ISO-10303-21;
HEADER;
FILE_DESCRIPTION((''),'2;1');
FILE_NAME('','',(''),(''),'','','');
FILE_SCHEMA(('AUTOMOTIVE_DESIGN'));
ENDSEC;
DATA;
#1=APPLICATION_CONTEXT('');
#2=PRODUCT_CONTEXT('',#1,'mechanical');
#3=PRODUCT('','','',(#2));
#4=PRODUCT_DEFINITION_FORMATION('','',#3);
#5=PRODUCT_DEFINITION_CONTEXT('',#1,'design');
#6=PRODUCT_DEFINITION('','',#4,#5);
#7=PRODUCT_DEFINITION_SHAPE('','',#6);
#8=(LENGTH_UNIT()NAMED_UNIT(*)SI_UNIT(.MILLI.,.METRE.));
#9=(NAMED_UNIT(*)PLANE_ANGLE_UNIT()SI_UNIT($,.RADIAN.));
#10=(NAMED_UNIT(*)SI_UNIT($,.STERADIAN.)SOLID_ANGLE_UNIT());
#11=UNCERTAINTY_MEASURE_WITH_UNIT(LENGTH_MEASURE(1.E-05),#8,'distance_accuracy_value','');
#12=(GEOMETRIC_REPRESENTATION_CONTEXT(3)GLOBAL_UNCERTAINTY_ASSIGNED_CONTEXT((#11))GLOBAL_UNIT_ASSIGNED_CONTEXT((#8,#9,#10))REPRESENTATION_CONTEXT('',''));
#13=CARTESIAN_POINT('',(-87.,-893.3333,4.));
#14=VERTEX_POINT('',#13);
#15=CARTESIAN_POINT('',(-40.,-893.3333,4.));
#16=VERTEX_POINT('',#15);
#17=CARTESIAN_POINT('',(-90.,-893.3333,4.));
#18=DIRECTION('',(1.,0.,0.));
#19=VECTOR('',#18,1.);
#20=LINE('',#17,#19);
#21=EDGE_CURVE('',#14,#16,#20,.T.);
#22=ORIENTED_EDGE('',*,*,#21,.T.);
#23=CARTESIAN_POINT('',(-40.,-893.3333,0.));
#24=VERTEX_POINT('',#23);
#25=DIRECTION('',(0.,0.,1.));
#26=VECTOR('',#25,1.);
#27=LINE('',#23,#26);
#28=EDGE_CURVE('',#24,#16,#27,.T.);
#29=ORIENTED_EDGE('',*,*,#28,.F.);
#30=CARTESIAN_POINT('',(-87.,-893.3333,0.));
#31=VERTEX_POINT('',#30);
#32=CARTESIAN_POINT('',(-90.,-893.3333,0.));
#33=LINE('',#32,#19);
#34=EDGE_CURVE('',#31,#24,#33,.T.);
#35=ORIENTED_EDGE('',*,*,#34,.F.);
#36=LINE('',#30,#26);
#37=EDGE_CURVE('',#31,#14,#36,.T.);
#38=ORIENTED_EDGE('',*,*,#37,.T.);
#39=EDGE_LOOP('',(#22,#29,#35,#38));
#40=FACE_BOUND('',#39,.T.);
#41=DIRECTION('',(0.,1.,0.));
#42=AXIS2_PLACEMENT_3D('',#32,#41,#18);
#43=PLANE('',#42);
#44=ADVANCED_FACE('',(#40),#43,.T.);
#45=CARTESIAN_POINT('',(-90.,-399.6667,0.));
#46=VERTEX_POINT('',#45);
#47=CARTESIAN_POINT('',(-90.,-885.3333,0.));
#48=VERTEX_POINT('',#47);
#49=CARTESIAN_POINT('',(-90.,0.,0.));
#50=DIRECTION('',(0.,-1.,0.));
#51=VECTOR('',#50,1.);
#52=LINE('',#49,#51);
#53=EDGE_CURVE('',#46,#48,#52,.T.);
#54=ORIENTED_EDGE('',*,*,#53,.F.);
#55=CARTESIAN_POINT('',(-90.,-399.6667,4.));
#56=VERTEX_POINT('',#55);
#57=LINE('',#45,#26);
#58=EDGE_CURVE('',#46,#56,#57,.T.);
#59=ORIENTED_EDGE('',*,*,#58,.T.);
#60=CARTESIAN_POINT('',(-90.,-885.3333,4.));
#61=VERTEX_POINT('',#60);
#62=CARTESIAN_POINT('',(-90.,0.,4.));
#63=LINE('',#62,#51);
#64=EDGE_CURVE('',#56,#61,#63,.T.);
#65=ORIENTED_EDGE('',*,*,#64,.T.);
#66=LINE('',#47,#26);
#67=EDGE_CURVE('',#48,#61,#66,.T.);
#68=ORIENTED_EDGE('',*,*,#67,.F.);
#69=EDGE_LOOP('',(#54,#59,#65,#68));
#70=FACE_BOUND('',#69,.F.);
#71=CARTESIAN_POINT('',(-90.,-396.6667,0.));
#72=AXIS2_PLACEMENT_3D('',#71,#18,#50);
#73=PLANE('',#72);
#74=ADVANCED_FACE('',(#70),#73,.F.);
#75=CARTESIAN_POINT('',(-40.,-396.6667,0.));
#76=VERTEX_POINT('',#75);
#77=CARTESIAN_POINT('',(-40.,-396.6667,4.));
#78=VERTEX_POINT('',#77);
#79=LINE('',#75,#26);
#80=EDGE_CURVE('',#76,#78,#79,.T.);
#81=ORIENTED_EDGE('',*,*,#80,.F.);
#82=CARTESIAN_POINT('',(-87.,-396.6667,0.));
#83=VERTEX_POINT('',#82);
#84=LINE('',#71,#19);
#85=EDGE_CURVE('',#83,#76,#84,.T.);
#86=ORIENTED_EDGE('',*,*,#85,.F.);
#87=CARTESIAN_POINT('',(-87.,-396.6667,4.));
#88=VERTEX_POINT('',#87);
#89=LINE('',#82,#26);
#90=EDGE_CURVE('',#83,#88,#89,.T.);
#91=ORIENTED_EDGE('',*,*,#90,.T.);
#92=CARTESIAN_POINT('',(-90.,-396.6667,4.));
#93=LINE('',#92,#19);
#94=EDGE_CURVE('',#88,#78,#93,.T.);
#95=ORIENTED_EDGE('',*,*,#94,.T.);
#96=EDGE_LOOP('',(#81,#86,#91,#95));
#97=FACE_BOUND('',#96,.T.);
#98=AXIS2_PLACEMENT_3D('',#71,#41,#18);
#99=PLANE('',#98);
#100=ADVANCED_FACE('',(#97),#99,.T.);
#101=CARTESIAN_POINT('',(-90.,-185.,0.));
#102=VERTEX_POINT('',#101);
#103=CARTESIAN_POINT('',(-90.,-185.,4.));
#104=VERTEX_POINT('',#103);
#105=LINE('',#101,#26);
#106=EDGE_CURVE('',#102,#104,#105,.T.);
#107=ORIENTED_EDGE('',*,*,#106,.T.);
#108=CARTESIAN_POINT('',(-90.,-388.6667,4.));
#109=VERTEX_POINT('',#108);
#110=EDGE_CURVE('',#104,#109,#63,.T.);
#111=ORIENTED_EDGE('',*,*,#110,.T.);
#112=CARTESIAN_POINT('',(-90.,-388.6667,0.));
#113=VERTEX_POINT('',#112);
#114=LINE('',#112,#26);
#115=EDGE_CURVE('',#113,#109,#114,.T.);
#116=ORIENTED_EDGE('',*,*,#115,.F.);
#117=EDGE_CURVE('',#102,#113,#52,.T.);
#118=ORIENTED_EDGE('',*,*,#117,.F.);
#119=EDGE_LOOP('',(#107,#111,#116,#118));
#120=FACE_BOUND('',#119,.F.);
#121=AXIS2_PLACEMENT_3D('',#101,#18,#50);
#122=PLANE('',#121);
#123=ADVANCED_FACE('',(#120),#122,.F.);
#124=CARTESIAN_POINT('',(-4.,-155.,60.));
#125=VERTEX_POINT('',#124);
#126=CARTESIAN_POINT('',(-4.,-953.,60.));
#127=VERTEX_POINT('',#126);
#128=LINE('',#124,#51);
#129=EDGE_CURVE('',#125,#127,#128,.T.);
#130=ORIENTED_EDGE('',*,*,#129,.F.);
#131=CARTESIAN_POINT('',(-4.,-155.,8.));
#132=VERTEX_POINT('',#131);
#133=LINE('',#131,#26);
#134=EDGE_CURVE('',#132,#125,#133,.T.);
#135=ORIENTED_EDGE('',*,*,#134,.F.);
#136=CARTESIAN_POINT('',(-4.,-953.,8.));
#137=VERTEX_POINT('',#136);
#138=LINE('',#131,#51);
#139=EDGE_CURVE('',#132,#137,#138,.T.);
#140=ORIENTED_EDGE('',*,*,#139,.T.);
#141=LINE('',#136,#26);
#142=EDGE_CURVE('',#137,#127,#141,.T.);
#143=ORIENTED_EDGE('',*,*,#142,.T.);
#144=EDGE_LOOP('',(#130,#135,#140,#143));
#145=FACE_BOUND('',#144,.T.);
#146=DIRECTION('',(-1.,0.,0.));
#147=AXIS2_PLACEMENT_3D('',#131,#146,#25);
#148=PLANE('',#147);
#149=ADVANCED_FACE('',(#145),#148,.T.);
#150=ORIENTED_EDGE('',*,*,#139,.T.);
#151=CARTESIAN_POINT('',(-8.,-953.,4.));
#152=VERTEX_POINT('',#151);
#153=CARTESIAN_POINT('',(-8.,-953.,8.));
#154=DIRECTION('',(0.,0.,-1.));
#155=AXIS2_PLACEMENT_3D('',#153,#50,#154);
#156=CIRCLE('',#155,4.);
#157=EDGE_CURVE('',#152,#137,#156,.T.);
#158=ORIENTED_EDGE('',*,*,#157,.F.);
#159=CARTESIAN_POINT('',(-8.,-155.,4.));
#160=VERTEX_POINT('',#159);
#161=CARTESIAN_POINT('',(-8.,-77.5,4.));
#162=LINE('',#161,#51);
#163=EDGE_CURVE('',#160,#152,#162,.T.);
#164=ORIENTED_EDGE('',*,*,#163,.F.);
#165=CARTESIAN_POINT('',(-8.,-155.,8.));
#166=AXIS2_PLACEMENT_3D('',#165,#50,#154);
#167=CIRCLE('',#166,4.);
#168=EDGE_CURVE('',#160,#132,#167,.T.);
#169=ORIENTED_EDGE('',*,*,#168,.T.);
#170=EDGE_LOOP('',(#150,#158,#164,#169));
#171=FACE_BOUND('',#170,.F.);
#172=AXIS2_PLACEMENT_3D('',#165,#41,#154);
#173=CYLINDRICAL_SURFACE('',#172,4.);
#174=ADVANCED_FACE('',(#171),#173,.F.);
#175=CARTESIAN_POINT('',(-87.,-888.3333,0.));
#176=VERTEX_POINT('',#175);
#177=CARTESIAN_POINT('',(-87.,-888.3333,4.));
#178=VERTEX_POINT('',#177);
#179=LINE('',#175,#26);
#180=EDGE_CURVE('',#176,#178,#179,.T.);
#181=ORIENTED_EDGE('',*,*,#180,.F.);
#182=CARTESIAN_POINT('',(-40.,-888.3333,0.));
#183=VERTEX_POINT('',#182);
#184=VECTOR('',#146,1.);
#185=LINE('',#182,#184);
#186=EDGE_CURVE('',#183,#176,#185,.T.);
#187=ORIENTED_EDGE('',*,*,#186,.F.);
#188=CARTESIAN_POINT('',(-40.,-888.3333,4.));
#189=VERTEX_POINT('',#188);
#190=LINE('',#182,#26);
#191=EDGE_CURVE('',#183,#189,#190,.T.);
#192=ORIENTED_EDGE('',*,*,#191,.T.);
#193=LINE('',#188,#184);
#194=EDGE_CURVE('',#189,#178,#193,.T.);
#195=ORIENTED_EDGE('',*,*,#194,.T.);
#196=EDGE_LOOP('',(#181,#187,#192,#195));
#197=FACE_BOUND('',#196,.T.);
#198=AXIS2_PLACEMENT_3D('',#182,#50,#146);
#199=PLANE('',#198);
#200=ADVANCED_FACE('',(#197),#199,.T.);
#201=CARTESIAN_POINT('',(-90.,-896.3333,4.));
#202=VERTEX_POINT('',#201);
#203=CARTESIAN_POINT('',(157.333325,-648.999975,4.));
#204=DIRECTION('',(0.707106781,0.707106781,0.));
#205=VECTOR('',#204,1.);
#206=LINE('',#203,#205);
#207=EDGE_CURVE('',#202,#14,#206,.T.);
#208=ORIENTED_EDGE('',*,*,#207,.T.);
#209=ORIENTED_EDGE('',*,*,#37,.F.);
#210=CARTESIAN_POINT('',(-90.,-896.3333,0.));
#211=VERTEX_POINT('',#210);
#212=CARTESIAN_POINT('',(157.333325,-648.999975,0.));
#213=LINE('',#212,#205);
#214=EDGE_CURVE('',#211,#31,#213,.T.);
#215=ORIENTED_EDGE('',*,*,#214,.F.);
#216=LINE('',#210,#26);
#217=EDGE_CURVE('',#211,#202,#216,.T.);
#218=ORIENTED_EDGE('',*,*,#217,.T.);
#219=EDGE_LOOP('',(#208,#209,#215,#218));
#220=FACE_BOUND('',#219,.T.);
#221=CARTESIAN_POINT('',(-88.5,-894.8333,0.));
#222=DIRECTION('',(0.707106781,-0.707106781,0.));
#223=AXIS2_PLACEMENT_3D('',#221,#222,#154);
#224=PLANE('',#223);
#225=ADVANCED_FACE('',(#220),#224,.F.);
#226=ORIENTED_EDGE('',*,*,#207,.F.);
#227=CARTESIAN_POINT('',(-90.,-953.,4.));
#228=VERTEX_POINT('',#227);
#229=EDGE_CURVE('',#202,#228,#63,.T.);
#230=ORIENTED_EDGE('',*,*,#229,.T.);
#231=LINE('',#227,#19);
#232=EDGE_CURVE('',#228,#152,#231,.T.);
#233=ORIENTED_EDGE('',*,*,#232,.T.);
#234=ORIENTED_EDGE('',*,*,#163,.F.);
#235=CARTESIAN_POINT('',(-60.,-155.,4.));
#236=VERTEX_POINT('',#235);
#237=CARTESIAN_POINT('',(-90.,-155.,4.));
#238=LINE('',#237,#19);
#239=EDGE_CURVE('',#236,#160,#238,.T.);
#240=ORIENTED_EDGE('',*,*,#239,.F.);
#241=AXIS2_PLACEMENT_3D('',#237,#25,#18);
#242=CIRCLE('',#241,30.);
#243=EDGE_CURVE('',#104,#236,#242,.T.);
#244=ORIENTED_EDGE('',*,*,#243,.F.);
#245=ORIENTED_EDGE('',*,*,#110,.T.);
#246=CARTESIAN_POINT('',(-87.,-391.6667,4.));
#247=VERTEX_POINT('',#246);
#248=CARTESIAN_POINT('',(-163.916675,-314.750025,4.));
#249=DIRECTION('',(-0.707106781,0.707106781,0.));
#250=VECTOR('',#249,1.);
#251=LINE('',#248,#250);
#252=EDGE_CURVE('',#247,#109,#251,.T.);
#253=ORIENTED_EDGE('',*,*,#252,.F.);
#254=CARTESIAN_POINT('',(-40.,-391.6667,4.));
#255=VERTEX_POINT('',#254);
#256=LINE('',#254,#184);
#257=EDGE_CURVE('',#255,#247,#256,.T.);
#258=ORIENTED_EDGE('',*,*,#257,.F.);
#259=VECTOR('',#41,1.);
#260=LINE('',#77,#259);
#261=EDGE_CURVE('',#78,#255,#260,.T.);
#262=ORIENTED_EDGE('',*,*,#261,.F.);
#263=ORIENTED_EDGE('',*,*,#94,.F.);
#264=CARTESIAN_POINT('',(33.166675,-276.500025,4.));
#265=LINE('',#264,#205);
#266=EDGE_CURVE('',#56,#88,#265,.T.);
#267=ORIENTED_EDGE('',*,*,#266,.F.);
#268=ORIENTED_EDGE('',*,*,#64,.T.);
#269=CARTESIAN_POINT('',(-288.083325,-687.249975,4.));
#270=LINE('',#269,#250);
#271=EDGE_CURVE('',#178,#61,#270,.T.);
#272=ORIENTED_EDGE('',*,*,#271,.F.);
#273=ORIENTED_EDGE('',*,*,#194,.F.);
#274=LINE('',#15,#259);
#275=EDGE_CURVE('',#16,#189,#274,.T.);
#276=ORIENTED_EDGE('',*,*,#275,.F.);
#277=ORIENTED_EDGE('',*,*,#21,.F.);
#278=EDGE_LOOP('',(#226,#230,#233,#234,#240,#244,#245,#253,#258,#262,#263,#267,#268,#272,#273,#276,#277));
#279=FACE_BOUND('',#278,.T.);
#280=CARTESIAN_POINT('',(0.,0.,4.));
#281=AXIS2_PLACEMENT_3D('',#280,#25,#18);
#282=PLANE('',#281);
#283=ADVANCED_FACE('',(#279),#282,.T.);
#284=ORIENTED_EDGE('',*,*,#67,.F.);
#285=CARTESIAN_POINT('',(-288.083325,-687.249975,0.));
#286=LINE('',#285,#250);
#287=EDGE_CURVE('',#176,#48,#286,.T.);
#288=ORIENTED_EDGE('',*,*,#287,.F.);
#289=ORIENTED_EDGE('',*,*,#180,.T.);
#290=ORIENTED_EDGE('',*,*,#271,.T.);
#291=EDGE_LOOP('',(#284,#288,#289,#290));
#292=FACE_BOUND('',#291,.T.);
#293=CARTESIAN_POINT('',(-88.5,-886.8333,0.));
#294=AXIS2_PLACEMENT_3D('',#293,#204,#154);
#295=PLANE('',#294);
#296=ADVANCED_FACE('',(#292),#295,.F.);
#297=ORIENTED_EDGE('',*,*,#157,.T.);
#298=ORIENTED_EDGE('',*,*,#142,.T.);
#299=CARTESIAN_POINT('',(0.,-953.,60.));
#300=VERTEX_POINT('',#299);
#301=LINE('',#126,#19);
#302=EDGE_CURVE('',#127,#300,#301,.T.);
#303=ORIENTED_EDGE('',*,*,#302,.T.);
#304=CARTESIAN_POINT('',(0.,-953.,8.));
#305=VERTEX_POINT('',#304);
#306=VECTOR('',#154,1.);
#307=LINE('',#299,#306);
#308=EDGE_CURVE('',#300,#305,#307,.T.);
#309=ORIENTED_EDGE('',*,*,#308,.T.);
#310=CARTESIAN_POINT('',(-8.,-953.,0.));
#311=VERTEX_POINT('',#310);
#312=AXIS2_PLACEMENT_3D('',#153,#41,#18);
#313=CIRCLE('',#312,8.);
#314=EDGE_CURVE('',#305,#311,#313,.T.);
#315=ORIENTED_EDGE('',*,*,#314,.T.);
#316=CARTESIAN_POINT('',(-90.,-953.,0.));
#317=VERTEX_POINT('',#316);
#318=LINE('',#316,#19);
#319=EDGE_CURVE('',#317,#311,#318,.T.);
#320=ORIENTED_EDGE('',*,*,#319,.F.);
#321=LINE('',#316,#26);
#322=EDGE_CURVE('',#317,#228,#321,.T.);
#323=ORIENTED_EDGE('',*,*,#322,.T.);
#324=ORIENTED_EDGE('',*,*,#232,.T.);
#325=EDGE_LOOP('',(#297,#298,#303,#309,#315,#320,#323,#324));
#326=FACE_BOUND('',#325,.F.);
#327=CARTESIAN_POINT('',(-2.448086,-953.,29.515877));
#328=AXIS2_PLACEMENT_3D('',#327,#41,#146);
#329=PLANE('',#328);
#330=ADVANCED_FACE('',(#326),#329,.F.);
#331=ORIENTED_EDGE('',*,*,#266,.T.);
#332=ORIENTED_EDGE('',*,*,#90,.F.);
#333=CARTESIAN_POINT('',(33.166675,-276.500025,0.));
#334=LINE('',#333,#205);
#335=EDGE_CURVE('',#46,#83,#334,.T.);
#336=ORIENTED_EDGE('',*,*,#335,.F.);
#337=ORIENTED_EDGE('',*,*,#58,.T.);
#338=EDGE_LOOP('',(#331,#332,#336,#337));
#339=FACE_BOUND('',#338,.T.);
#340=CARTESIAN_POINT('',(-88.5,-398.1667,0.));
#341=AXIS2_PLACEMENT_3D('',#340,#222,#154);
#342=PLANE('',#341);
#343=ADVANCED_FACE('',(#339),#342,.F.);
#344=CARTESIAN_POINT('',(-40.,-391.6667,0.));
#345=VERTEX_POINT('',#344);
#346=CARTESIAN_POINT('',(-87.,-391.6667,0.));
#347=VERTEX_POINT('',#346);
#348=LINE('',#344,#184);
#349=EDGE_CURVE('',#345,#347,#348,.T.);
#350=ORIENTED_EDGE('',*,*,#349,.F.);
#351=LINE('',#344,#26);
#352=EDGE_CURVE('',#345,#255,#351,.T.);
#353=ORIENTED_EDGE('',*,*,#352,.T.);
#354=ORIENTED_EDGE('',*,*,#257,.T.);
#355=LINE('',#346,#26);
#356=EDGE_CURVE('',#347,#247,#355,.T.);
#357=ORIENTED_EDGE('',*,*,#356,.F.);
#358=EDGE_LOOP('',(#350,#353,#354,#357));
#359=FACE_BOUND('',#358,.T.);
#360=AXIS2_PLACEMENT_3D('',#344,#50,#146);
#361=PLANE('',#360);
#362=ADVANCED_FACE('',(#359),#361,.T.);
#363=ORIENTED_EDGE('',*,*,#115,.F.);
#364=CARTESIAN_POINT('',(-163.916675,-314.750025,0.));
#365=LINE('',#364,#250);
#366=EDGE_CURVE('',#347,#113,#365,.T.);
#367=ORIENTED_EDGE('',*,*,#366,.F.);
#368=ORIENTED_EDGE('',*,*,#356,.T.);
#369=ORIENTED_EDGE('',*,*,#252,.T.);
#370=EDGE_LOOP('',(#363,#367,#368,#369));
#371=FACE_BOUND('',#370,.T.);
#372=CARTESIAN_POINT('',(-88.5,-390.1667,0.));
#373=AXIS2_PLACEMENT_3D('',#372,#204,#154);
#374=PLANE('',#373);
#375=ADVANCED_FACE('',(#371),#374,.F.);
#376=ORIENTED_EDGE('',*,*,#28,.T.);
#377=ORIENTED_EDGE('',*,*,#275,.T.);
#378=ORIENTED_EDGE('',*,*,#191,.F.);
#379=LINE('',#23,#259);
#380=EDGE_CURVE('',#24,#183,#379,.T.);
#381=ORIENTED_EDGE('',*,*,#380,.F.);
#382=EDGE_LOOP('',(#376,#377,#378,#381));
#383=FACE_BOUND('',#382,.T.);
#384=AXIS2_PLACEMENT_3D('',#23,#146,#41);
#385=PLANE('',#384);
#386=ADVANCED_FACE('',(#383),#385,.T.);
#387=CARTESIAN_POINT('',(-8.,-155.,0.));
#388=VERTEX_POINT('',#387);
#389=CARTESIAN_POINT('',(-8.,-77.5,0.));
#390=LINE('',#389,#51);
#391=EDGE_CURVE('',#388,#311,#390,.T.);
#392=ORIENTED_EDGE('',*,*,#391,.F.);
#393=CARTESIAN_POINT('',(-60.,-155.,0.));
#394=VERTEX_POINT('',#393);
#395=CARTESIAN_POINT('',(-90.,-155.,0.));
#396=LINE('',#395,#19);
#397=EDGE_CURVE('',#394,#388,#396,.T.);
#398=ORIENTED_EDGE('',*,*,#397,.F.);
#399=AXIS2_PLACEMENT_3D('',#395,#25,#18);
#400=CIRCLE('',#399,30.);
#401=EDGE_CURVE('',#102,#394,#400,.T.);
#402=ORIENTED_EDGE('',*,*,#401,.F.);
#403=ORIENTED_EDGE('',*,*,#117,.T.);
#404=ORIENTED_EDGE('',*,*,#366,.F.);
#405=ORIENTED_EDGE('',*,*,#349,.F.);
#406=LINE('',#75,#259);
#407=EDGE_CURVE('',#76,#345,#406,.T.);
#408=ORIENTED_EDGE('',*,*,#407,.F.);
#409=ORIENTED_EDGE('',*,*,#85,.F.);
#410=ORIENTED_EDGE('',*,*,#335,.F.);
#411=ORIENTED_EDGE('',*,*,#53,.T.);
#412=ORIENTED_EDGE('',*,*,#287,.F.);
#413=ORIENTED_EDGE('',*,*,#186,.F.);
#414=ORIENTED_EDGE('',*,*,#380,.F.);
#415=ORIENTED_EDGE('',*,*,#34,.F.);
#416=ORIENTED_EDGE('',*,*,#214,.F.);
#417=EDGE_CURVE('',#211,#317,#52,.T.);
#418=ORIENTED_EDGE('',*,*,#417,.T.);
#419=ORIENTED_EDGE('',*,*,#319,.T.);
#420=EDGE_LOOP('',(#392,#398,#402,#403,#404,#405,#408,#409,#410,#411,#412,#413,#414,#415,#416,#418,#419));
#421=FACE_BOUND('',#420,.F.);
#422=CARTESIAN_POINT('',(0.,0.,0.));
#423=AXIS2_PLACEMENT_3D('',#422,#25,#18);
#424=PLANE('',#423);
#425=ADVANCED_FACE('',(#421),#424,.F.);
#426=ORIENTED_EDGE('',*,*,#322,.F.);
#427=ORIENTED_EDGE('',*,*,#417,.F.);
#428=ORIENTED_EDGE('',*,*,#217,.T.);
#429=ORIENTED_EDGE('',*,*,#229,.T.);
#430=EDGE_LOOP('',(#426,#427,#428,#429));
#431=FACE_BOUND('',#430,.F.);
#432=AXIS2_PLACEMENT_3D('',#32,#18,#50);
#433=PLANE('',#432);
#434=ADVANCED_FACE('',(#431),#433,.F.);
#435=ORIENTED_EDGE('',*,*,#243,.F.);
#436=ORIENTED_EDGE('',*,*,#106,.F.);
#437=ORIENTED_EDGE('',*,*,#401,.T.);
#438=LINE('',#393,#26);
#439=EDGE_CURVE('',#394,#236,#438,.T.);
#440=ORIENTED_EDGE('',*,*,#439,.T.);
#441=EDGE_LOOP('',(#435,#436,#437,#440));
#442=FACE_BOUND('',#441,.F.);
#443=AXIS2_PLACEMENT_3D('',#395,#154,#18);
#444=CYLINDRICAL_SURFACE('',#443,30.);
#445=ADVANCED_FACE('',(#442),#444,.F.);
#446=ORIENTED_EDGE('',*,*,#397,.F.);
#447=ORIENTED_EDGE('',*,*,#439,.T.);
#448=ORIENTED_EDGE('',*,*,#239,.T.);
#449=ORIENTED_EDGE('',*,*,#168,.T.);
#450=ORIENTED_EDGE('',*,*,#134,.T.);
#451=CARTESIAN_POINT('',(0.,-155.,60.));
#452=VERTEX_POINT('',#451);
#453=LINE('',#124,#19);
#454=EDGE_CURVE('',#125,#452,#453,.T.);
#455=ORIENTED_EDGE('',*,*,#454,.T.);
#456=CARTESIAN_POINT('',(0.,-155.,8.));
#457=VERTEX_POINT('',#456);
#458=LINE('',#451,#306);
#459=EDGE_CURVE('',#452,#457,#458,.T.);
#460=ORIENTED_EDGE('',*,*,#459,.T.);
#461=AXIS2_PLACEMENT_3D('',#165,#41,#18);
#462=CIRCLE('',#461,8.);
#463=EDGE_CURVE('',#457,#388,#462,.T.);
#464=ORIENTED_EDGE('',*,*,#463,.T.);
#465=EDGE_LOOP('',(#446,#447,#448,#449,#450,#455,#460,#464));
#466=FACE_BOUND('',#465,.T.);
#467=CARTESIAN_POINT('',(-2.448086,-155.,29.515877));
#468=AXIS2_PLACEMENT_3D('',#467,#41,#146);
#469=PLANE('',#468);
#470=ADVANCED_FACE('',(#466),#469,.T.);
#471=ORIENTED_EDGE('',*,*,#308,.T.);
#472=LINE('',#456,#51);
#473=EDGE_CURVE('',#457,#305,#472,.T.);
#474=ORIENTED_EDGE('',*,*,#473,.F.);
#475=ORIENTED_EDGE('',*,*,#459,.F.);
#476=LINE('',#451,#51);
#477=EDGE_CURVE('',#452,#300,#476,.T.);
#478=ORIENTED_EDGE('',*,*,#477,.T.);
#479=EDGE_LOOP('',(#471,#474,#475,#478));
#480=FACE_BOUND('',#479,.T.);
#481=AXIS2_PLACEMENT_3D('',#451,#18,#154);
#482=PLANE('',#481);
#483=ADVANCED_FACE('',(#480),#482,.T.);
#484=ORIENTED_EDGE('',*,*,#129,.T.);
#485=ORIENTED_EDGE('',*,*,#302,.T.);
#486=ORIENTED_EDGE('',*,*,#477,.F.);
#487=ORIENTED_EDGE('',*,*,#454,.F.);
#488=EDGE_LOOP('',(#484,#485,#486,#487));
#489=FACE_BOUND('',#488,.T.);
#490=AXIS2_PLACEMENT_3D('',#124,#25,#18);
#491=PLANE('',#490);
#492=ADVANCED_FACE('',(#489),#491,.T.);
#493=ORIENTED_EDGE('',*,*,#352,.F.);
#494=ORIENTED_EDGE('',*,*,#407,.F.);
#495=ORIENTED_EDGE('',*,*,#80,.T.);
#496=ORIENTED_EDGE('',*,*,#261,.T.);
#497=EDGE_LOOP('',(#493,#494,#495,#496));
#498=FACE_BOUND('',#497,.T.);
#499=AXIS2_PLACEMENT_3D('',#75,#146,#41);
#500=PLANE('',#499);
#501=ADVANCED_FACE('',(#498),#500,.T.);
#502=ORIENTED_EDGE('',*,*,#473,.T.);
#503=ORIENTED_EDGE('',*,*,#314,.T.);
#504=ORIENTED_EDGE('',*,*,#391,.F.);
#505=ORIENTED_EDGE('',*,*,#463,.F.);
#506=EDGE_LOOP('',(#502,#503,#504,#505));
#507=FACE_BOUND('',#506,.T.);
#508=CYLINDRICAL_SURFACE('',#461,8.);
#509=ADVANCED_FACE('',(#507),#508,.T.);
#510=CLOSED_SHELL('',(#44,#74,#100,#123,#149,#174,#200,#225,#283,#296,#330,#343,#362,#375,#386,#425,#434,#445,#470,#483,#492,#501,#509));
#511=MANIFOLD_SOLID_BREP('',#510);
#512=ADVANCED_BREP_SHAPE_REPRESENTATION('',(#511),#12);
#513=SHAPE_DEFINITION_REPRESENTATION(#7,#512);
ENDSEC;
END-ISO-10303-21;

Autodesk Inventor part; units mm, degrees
ref_plane "YZ Plane" through (0, 0, 0) normal (1, 0, 0) x (0, 1, 0)
ref_plane "XZ Plane" through (0, 0, 0) normal (0, 1, 0) x (-1, 0, 0)
ref_plane "XY Plane" through (0, 0, 0) normal (0, 0, 1) x (1, 0, 0)
sketch "Sketch1" plane through (0, 0, 0) normal (0, 0, 1) x (1, 0, 0)
  line L0 (0, 0) -> (-90, 0)
  line L1 (-90, 0) -> (-90, -1490)
  line L2 (-90, -1490) -> (0, -1490)
  line L3 (0, -1490) -> (0, 0)
  line L4 (-90, -1390) -> (-40, -1390)
  line L5 (-40, -1390) -> (-40, -1385)
  line L6 (-40, -1385) -> (-90, -1385)
  line L7 (-90, -1385) -> (-90, -1390)
  line L8 (-90, -893.3333) -> (-40, -893.3333)
  line L9 (-40, -893.3333) -> (-40, -888.3333)
  line L10 (-40, -888.3333) -> (-90, -888.3333)
  line L11 (-90, -888.3333) -> (-90, -893.3333)
  line L12 (-90, -396.6667) -> (-40, -396.6667)
  line L13 (-40, -396.6667) -> (-40, -391.6667)
  line L14 (-40, -391.6667) -> (-90, -391.6667)
  line L15 (-90, -391.6667) -> (-90, -396.6667)
  circle A0 centre (-90, -155) radius 30
  line L16 (-90, -155) -> (0, -155)
  line L17 (-90, -953) -> (0, -953)
  point P0 (-90, -391.6667)
  point P1 (-90, -396.6667)
  point P2 (-90, -888.3333)
  point P3 (-90, -893.3333)
  point P4 (-90, -125)
  point P5 (-90, -185)
  point P6 (-60, -155)
  dimension "d0" = 1490
  dimension "d1" = 90
  dimension "d2" = 5
  dimension "d4" = 100
  dimension "d7" = 496.6667
  dimension "d23" = 40
  dimension "d28" = 60
  dimension "d30" = 1335
  dimension "d31" = 953
extrude "Plate1" add sketch "Sketch1" along normal blind 4 contours L3 L17 L1 L8 L9 L10 L12 L13 L14 A0 L16
sketch "Sketch2" plane through (-4, -155, 0) normal (1, 0, 0) x (0, 1, 0)
  line L0 (-798, 0) -> (0, 0)
  line L1 (0, 0) -> (0, 60)
  line L2 (0, 60) -> (-798, 60)
  line L3 (-798, 60) -> (-798, 0)
edge flange "Flange1" height 60 angle 90 thickness 4 bend radius 4 thickness toward (1, 0, 0) relief tear relief width 4 relief depth 2 edges at (0, -554, 4) wall of the first edge with corners at (-4, -953, 0) (-4, -155, 0) (-4, -155, 60) (-4, -953, 60)
bend "Bend1"
corner "Corner1"
chamfer "Corner Chamfer1" distance 3 angle 45 4 edges at (-90, -893.3333, 2) (-90, -888.3333, 2) (-90, -391.6667, 2) (-90, -396.6667, 2)
equation "\"d0\" = Стрингер_длина"
equation "\"d2\" = паз_под_стрингер_толщина"
equation "\"d7\" = Шаг_шпангоутов"
equation "\"d28\" = 2 * радиус_выреза_под_сварку"
equation "\"d12\" = Thickness"
equation "\"d13\" = BendReliefWidth"
equation "\"d14\" = BendReliefDepth"
equation "\"d15\" = MinimumRemnant"
equation "\"d16\" = TransitionRadius"
equation "\"d17\" = ребро_усилителей"
equation "\"d19\" = BendRadius"
equation "\"d20\" = CornerReliefSize"
equation "\"d21\" = GapSize"
equation "\"d22\" = JacobiRadiusSize"
equation "\"BendRadius\" = Thickness"
equation "\"BendReliefWidth\" = Thickness"
equation "\"BendReliefDepth\" = 0.5 * Thickness"
equation "\"CornerReliefSize\" = 4 * Thickness"
equation "\"MinimumRemnant\" = 2 * Thickness"
equation "\"TransitionRadius\" = BendRadius"
equation "\"JacobiRadiusSize\" = BendRadius"
equation "\"GapSize\" = Thickness"
equation "\"Стрингер_длина\" = 1490"
equation "\"паз_под_стрингер_толщина\" = 5"
equation "\"Шаг_шпангоутов\" = 496.666667"
equation "\"радиус_выреза_под_сварку\" = 30"
equation "\"Thickness\" = 4"
equation "\"ребро_усилителей\" = 60"
properties part number "GBK 0103 stringer 2_Dummy" material "Steel"
